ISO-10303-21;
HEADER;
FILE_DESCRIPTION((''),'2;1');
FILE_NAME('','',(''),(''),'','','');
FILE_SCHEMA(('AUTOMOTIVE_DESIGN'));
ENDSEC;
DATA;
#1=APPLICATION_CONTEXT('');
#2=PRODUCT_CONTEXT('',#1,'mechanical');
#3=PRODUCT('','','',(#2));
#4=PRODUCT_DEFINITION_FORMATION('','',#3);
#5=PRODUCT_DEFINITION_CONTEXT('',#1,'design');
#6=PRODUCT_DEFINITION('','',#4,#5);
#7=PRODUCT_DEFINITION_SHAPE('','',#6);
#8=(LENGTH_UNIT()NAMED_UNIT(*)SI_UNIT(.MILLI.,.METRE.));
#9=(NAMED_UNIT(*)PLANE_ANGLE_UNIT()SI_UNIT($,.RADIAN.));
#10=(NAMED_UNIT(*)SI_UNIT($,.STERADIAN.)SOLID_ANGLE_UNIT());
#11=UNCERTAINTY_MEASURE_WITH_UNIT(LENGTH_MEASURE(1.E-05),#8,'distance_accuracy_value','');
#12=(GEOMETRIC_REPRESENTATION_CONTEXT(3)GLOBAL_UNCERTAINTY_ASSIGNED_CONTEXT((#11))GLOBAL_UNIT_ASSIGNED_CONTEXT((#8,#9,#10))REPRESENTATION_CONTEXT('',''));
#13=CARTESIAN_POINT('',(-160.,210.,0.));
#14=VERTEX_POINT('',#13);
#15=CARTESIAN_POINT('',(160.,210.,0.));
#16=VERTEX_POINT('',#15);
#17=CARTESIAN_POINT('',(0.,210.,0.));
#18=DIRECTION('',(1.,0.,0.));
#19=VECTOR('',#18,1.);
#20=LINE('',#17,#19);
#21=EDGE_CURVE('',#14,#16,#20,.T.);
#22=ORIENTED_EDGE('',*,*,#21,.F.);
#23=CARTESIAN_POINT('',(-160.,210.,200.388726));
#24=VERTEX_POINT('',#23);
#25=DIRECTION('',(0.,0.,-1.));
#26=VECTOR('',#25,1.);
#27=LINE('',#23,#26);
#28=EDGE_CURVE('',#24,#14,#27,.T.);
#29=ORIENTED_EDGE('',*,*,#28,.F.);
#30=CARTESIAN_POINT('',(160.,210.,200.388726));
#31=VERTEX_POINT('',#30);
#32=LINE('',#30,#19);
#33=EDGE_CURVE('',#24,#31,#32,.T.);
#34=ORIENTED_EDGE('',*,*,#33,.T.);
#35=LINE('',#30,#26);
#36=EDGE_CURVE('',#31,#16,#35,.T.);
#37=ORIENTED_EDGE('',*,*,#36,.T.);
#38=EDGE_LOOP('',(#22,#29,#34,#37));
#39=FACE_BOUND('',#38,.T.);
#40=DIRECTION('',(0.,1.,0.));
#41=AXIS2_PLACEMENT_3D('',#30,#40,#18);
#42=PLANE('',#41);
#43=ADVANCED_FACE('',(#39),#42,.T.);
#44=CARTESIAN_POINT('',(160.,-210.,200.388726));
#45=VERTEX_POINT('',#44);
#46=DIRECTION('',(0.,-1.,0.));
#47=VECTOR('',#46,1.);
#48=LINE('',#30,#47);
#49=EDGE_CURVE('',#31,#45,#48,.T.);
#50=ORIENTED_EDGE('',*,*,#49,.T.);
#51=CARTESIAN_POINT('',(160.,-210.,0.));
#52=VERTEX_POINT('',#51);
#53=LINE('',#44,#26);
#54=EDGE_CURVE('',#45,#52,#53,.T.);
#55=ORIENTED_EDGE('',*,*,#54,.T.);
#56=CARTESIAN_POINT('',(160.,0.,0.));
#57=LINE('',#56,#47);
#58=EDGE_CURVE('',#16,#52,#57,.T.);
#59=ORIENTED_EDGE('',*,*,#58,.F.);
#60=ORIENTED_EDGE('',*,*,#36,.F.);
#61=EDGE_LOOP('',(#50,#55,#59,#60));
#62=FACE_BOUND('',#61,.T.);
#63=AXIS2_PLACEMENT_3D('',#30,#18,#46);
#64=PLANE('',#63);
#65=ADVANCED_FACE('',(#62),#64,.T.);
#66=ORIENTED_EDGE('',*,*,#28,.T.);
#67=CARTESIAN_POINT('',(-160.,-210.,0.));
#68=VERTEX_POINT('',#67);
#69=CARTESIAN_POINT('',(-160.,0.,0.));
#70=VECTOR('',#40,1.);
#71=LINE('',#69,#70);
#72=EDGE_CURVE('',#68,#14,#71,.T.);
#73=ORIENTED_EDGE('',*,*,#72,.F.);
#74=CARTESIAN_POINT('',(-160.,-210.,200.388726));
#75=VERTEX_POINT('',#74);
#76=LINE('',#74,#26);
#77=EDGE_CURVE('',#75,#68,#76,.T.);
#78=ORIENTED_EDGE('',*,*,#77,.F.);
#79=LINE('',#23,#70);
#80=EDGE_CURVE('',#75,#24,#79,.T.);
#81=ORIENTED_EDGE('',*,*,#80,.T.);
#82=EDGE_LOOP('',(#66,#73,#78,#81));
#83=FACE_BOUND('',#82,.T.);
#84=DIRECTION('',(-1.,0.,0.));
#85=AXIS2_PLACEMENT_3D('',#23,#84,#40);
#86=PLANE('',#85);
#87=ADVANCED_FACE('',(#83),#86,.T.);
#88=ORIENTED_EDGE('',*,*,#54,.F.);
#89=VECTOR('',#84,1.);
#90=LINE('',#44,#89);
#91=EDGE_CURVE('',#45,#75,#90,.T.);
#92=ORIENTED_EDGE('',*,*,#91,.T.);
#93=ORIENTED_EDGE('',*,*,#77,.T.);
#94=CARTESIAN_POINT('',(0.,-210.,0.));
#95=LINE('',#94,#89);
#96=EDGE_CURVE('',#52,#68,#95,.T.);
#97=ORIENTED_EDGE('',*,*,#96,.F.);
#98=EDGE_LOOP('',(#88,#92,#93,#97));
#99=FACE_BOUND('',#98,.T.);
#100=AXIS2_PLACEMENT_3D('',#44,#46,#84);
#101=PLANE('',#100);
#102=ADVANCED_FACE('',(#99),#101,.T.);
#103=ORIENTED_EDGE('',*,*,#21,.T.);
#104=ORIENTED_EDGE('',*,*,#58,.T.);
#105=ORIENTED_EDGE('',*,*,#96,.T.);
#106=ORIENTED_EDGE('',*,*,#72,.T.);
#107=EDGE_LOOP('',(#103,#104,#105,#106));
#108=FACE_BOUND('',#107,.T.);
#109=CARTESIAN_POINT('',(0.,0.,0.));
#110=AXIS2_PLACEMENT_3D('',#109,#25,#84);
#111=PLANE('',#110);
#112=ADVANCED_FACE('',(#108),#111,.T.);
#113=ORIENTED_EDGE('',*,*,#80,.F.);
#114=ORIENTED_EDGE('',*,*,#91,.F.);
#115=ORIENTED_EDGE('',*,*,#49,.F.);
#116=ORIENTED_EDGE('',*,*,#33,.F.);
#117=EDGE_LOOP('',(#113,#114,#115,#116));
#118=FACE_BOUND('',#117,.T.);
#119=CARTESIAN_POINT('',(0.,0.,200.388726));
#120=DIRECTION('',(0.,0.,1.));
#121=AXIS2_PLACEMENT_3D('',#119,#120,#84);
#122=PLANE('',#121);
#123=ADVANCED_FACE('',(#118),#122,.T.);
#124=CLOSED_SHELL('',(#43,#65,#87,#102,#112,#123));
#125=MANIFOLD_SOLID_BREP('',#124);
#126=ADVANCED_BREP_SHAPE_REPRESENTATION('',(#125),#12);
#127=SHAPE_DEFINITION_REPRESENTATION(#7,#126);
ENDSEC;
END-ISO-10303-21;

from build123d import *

# Parameters (mm, degrees)
SKETCH1_W             = 400
SKETCH1_H             = 500
BOSS_EXTRUDE1_DEPTH   = 300
CAVITY4_START         = 200.388726282
CAVITY4_OUTLINE_W     = 400
CAVITY4_OUTLINE_H     = 500
CAVITY4_DEPTH         = 99.611273718
CAVITY4_2_OUTLINE_W   = 400
CAVITY4_2_OUTLINE_H   = 500
CAVITY4_2_OUTLINE_W_2 = 320
CAVITY4_2_OUTLINE_H_2 = 420
CAVITY4_2_DEPTH       = 200.388726282


# Read off the part's stored shape, not the designer's step: Cavity4
with BuildPart() as part:
    # Sketch1 → Boss-Extrude1 (new body)
    with BuildSketch(Plane.XY):
        Rectangle(SKETCH1_W, SKETCH1_H)
    extrude(amount=BOSS_EXTRUDE1_DEPTH)

    # Cavity4 outline → Cavity4 (cut)
    with BuildSketch(Plane.XY.offset(CAVITY4_START)):
        Rectangle(CAVITY4_OUTLINE_W, CAVITY4_OUTLINE_H)
    extrude(amount=CAVITY4_DEPTH, mode=Mode.SUBTRACT)

    # Cavity4 2 outline → Cavity4 2 (cut)
    with BuildSketch(Plane.XY):
        Rectangle(CAVITY4_2_OUTLINE_W, CAVITY4_2_OUTLINE_H)
        Rectangle(CAVITY4_2_OUTLINE_W_2, CAVITY4_2_OUTLINE_H_2, mode=Mode.SUBTRACT)
    extrude(amount=CAVITY4_2_DEPTH, mode=Mode.SUBTRACT)


solid = part.part
